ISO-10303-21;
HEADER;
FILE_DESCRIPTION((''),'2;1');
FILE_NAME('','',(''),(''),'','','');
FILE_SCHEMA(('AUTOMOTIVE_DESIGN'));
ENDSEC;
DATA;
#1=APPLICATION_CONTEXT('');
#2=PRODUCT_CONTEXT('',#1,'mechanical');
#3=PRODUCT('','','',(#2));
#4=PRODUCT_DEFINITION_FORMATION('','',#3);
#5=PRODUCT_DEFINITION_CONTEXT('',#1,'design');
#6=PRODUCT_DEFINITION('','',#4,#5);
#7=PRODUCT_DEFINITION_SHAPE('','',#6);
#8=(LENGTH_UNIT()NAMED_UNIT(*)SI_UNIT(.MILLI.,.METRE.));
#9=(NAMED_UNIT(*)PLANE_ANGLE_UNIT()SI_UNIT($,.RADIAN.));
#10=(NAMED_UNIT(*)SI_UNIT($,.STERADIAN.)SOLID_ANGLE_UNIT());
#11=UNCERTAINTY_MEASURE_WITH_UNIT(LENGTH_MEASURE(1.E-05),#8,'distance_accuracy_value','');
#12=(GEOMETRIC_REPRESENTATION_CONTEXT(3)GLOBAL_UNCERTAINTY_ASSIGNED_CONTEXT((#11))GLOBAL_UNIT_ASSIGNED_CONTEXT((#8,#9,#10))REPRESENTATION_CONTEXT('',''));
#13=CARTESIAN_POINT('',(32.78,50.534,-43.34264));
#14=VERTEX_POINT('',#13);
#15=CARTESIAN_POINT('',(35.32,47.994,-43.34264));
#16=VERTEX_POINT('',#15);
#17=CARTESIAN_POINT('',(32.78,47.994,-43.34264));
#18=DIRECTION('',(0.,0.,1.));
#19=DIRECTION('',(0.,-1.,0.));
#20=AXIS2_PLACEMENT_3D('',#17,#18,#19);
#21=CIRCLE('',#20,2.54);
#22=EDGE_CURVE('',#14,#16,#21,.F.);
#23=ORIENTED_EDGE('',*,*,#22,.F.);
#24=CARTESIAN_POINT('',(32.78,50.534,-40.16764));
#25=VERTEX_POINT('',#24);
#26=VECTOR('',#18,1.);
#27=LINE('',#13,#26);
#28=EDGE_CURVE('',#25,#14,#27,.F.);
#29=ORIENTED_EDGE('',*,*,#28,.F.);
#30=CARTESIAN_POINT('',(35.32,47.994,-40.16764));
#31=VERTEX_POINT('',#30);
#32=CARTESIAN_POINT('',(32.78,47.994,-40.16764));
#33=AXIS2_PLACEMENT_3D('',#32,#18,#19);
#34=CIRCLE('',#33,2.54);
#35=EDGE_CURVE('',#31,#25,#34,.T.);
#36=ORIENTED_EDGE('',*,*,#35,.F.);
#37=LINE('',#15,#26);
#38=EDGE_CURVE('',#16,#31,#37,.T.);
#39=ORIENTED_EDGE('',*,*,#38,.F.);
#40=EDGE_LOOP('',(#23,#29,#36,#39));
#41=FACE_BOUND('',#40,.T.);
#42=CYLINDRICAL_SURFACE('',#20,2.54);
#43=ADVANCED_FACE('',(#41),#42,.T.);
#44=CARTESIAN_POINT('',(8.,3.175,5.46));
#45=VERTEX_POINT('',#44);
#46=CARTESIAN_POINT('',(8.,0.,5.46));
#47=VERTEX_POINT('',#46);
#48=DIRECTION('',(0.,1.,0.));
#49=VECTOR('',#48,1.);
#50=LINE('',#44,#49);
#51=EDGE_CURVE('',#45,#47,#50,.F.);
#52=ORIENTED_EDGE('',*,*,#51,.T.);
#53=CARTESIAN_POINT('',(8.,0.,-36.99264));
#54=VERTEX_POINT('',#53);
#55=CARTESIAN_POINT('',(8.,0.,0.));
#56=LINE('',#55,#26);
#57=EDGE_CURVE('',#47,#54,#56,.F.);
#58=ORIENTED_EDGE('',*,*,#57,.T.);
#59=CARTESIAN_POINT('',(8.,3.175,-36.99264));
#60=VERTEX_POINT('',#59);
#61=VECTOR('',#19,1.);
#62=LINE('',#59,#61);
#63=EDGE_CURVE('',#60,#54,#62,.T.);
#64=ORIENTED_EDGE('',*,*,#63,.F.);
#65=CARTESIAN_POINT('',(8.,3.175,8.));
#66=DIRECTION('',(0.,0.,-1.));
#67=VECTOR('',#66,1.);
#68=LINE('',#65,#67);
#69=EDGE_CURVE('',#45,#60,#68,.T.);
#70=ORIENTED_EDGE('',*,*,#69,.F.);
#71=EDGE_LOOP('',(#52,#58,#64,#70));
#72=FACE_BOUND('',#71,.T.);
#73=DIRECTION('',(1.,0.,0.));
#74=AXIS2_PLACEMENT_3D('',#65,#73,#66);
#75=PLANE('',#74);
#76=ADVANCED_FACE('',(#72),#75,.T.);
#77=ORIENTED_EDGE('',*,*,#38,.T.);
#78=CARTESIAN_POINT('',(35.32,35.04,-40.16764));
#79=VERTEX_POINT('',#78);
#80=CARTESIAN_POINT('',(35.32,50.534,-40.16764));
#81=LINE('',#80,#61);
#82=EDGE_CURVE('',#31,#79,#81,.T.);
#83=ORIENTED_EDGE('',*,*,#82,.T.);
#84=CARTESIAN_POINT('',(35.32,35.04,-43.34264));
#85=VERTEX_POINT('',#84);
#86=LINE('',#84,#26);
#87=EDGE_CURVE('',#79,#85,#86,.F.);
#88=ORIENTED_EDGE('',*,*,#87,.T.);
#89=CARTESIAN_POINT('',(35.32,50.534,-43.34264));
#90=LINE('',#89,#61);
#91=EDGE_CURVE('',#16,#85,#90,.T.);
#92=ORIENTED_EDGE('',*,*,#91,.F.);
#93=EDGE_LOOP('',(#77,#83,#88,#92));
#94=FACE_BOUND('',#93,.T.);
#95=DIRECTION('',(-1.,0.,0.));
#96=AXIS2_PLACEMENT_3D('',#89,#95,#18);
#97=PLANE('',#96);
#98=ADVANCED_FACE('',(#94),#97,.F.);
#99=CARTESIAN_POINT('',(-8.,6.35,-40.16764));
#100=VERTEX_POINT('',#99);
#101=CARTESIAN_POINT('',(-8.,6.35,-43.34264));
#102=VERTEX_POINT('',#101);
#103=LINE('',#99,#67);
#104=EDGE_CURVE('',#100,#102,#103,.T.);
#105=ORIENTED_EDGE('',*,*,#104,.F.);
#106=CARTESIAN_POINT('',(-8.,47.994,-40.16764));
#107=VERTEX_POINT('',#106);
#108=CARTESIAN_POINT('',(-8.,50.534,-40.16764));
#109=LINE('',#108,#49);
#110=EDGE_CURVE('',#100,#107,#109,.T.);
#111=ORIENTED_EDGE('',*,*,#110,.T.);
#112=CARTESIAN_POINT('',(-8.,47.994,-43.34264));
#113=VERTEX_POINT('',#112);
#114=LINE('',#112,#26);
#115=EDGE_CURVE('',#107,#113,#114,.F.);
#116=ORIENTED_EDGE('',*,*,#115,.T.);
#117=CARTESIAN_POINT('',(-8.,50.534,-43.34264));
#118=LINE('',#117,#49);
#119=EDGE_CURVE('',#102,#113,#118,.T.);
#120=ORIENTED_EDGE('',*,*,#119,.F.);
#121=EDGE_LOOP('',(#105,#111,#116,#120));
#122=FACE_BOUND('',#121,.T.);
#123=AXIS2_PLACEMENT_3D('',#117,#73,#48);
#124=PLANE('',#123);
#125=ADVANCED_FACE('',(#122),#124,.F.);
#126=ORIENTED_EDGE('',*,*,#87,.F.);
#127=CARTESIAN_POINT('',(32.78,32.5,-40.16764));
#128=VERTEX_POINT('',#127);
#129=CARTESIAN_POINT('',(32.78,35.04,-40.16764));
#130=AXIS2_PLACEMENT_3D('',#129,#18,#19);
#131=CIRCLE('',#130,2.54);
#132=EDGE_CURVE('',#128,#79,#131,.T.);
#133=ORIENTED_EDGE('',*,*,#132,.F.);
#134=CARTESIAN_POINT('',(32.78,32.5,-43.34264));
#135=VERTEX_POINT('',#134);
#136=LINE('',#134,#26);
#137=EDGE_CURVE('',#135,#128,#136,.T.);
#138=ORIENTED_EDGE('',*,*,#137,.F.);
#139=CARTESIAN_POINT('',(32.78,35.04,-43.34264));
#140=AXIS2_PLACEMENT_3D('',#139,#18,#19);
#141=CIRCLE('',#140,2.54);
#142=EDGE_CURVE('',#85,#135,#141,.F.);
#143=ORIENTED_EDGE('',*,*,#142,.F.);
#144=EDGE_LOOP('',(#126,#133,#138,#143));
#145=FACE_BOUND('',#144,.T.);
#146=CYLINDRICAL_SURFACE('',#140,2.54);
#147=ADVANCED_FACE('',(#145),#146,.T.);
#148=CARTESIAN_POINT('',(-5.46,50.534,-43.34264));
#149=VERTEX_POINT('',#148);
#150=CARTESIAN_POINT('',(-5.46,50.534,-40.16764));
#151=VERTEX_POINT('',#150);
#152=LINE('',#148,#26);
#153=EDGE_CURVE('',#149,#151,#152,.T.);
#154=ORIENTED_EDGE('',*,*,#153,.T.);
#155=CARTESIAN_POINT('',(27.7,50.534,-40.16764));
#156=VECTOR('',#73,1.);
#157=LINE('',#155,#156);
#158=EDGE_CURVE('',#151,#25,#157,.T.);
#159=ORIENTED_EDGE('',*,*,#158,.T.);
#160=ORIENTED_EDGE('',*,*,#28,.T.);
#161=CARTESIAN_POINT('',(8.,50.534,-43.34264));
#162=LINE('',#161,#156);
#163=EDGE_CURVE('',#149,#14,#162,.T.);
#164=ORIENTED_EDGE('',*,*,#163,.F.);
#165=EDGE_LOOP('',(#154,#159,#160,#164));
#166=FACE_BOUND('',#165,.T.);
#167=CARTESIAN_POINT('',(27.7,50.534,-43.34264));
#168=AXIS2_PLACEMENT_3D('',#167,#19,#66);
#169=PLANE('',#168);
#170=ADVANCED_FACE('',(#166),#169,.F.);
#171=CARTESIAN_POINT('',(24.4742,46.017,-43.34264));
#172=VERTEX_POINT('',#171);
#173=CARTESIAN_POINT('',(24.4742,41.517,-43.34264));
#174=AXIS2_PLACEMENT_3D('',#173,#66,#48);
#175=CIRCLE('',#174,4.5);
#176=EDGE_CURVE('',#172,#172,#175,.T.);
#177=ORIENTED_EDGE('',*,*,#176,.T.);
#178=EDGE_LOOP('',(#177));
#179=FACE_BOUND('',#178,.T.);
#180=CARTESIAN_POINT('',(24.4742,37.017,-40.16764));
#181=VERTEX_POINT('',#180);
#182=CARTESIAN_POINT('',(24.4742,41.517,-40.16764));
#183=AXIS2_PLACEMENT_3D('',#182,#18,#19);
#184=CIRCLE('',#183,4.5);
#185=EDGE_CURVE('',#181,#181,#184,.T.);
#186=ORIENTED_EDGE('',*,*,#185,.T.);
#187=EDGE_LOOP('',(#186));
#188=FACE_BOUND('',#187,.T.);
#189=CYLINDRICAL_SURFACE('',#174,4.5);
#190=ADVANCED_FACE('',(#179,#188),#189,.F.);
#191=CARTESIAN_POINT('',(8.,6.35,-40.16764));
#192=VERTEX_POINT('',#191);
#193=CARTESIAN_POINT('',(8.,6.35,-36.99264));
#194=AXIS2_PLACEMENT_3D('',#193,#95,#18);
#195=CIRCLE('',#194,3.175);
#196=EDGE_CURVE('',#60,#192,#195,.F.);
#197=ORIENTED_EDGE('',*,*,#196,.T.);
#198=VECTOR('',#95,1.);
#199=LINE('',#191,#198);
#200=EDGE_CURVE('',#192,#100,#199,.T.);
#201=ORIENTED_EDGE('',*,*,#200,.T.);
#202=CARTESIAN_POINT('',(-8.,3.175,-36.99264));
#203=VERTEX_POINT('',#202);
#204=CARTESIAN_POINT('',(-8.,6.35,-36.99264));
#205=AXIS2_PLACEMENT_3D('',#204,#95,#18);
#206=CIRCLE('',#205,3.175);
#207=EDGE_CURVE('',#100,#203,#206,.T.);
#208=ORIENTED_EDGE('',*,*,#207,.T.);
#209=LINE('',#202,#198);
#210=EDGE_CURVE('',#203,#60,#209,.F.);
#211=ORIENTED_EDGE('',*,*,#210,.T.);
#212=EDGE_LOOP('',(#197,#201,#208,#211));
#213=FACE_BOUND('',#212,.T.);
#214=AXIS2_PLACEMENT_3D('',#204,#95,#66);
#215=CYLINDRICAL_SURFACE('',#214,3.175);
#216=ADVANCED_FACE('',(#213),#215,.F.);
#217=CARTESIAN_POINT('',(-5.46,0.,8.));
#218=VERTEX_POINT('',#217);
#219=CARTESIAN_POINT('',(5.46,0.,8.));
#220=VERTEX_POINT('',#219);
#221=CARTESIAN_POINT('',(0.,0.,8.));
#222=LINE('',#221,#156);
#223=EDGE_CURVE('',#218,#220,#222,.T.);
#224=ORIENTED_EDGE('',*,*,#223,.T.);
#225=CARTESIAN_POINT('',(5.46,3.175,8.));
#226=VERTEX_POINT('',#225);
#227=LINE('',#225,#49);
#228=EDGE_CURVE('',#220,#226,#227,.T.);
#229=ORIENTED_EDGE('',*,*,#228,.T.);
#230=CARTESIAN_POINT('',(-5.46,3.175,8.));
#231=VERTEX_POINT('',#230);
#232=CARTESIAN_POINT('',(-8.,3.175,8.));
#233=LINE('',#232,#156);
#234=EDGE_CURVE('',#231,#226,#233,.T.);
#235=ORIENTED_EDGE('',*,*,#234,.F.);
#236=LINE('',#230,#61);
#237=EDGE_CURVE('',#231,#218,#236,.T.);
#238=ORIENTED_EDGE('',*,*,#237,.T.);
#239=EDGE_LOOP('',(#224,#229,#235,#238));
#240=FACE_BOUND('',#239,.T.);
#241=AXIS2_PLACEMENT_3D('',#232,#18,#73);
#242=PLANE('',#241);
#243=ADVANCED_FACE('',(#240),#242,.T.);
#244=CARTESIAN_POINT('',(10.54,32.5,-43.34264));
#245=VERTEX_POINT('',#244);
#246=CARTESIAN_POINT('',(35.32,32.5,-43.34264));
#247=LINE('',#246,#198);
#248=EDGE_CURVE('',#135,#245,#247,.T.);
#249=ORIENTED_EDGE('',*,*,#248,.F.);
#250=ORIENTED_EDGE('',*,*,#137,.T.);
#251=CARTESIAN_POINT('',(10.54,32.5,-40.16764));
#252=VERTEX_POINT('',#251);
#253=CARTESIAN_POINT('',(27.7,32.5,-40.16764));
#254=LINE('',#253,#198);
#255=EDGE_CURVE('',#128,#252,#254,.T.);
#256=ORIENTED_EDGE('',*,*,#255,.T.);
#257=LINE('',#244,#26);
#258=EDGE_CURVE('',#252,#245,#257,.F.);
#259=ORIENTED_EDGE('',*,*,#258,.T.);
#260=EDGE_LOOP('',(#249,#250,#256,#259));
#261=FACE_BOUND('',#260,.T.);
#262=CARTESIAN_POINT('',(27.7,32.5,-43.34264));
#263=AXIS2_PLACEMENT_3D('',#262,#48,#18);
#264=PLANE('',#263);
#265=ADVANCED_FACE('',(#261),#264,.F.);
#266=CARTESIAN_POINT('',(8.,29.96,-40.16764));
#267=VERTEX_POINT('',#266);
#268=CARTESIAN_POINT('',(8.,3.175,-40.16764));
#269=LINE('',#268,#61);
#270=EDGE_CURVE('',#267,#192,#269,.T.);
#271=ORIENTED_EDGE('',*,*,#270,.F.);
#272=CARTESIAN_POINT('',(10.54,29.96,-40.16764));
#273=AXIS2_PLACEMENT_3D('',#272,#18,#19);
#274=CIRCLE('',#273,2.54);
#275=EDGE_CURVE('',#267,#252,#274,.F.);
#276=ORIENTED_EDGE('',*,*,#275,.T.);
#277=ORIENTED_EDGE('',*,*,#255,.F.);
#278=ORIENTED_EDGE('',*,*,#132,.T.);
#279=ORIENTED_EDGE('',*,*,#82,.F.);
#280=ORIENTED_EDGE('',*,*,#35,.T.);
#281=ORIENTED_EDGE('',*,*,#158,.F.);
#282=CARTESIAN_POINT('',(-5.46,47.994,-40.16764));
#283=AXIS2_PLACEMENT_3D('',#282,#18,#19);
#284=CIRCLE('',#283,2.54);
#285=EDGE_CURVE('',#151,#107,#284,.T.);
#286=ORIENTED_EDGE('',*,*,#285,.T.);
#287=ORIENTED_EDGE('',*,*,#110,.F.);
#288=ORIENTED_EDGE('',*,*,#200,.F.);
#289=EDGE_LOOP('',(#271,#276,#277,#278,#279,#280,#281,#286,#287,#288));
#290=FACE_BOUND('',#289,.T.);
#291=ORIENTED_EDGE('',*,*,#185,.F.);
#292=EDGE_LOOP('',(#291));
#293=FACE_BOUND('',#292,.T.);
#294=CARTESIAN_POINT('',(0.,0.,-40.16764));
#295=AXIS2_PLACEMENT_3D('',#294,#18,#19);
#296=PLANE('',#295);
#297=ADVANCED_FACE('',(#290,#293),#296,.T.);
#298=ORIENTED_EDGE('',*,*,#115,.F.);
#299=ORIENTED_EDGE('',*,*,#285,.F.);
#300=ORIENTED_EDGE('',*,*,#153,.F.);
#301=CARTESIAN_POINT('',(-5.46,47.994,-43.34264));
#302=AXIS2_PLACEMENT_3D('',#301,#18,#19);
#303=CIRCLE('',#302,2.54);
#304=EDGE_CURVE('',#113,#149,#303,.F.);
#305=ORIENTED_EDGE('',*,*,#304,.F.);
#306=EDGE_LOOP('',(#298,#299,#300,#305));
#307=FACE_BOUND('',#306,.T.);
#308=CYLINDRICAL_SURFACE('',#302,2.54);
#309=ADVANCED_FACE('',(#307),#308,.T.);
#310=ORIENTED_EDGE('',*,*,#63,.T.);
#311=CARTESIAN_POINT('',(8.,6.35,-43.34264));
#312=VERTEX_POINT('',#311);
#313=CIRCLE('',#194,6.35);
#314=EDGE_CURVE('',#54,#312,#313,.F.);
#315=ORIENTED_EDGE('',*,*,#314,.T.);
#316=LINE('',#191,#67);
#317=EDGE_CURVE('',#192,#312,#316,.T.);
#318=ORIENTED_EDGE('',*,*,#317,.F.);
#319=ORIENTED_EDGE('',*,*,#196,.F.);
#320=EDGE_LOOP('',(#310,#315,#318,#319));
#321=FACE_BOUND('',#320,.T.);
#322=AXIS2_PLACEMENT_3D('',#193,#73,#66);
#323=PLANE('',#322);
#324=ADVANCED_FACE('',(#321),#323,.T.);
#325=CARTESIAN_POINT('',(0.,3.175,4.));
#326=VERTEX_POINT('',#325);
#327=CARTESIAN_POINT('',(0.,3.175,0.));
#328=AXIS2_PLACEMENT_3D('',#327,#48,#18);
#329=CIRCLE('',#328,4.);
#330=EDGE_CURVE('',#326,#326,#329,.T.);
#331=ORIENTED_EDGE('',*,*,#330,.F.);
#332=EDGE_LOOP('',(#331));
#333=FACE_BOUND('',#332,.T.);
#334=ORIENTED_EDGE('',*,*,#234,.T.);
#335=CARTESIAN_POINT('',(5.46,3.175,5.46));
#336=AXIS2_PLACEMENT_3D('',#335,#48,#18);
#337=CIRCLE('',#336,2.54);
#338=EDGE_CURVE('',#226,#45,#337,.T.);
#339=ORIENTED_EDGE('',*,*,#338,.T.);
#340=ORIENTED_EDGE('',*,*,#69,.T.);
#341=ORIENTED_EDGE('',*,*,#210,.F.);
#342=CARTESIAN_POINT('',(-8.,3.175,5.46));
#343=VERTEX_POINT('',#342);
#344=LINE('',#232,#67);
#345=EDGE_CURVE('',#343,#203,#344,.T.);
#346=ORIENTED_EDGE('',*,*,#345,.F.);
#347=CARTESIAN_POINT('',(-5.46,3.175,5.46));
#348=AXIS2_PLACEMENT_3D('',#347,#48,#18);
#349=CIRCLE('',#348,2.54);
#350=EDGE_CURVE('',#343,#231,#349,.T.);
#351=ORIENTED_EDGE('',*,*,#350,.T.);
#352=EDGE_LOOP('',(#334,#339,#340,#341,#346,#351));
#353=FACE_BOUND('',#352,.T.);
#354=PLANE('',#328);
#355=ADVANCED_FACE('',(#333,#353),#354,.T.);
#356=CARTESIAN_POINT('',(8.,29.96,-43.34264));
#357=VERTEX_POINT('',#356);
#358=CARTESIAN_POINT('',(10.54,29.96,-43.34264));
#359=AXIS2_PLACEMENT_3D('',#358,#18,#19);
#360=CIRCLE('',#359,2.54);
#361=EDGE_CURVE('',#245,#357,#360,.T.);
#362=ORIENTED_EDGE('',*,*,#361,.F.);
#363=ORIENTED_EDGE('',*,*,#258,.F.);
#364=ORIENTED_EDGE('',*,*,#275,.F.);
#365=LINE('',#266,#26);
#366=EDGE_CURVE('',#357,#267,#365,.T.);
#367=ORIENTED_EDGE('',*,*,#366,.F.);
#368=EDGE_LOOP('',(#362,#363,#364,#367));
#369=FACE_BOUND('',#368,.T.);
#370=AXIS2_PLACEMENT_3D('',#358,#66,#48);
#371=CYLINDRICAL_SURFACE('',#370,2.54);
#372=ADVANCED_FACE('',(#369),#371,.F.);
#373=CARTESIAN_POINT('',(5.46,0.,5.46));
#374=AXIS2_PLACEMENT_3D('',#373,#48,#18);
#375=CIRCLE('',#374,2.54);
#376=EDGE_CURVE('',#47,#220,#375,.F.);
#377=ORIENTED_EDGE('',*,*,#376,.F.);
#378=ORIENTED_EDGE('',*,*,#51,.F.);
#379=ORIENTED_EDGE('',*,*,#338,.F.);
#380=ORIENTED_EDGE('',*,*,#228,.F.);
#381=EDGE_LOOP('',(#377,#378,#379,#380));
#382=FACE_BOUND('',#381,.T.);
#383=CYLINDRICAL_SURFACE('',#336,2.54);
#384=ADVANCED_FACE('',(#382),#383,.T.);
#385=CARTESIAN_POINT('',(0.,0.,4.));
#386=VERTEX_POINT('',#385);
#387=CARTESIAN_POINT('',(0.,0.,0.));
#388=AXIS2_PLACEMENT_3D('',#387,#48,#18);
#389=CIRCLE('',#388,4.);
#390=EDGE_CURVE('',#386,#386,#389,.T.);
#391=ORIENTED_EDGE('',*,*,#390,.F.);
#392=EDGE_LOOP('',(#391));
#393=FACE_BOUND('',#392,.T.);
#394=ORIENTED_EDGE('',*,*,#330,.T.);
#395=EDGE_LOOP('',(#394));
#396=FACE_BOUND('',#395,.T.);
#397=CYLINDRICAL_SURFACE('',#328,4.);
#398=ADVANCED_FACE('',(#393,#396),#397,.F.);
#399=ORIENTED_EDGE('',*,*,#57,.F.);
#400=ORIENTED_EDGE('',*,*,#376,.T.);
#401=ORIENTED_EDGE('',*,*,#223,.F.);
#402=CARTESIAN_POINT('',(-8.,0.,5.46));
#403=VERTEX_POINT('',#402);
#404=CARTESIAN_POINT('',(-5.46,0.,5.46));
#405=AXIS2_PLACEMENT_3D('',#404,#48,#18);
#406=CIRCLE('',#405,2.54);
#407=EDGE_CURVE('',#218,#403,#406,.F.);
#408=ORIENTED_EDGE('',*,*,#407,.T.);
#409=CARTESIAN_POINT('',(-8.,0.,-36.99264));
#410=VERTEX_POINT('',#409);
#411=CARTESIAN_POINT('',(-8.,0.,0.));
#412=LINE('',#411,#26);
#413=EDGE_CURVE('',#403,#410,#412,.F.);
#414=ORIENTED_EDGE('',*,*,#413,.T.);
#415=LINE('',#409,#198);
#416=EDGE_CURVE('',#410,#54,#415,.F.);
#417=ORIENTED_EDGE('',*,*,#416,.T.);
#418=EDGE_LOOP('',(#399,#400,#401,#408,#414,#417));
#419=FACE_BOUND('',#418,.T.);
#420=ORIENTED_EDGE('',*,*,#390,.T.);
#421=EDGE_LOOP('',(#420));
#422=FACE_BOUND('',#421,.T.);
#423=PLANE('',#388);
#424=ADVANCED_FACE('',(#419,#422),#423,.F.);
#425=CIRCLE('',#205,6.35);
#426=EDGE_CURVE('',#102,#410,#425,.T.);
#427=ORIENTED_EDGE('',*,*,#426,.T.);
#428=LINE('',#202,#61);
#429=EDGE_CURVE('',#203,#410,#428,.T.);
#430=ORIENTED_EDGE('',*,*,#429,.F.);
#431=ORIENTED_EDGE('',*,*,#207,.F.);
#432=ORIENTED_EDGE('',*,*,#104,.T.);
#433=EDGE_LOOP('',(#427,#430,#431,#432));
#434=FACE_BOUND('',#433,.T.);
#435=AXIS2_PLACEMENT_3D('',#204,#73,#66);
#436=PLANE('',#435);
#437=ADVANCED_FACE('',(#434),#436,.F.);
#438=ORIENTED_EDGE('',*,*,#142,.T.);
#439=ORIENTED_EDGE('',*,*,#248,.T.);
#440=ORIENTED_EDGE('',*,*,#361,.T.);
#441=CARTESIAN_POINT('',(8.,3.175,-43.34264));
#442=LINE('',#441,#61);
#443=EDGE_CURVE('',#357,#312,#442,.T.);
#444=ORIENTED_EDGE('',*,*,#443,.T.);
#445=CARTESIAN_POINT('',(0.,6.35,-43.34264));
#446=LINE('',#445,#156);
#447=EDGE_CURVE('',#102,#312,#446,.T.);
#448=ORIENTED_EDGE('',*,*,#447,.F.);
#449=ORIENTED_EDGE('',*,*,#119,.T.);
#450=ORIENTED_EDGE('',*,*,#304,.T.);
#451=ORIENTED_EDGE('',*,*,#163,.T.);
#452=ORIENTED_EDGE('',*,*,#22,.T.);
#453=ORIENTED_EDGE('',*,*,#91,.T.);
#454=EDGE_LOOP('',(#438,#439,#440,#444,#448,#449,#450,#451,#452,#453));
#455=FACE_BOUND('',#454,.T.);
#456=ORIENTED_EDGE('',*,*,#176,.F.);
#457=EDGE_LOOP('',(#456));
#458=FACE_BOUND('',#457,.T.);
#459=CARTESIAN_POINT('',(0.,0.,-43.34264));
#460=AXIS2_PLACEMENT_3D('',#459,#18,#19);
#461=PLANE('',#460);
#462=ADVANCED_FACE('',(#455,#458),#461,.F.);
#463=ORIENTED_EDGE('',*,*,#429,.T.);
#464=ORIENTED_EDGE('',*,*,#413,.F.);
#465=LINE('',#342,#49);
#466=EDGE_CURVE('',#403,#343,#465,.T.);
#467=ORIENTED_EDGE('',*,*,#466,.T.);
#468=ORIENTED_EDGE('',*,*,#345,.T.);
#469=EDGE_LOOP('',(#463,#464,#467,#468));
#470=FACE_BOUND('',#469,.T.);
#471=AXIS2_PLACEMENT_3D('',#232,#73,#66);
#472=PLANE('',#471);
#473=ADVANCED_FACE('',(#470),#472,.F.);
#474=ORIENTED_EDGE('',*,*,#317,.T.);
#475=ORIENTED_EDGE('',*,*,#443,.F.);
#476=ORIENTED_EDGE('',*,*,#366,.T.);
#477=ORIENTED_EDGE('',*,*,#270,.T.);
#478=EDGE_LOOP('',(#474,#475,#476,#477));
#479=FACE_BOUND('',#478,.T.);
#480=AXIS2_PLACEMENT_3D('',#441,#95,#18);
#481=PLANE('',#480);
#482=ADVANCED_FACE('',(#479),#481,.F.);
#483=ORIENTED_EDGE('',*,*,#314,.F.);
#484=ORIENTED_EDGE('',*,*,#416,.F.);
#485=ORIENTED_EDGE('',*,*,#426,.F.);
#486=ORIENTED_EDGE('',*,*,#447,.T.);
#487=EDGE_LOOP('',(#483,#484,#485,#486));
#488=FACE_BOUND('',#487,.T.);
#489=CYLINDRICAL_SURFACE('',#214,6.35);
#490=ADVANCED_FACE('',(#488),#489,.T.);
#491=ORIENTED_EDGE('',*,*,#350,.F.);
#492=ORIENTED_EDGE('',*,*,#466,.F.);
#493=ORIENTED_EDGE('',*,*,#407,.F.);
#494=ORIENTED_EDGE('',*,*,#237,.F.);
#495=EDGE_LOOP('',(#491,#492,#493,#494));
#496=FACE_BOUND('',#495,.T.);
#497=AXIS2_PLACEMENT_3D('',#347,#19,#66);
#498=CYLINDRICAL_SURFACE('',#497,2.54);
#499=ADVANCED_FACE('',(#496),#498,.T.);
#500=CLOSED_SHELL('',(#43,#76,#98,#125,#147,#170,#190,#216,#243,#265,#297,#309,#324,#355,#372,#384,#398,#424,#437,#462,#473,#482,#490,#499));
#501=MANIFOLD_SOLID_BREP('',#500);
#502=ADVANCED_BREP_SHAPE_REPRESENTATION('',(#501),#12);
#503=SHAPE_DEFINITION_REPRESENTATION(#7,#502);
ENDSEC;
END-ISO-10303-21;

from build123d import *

# Parameters (mm, degrees)
SKETCH1_W                    = 16
SKETCH1_H                    = 48.167640012
SKETCH1_R                    = 4
BOSS_EXTRUDE1_DEPTH          = 3.175
EDGE_FLANGE1_STRIP_W         = 19.05
EDGE_FLANGE1_STRIP_H         = 3.175
EDGE_FLANGE1_STRIP_CUT_DEPTH = 16
EDGE_FLANGE1_DEPTH           = 16
EDGE_FLANGE1_START           = 3.175
EDGE_FLANGE1_FLAT_DEPTH      = 3.175
SKETCH11_R                   = 3.7210804
CUT_EXTRUDE1_DEPTH           = 81.232501141
M8_CLEARANCE_HOLE1_D         = 9
FILLET1_R                    = 2.54


# Sheet-metal steps are written as plain solids
with BuildPart() as part:
    # Sketch1 → Boss-Extrude1 (new body)
    with BuildSketch(Plane(origin=(0, 0, 0), x_dir=(1, 0, 0), z_dir=(0, 1, 0))):
        with Locations((0, 16.083820006)):
            Rectangle(SKETCH1_W, SKETCH1_H)
        with Locations(Location((0, 0, 0), (0, 0, 270))):
            Circle(SKETCH1_R, mode=Mode.SUBTRACT)
    extrude(amount=BOSS_EXTRUDE1_DEPTH)

    # Edge-Flange1 strip (across the edge) → Edge-Flange1 strip cut (cut)
    with BuildSketch(Plane(origin=(8, 3.175, -40.167640012), x_dir=(0, 0, 1), z_dir=(-1, 0, 0))):
        with Locations((-6.35, -1.5875)):
            Rectangle(EDGE_FLANGE1_STRIP_W, EDGE_FLANGE1_STRIP_H)
    extrude(amount=EDGE_FLANGE1_STRIP_CUT_DEPTH, mode=Mode.SUBTRACT)

    # Edge-Flange1 bend section (across the edge) → Edge-Flange1 (add)
    with BuildSketch(Plane(origin=(8, 3.175, -40.167640012), x_dir=(0, 0, 1), z_dir=(-1, 0, 0))):
        with BuildLine():
            Line((-3.175, 3.175), (0, 3.175))
            ThreePointArc((0, 3.175), (0.92993597, 0.92993597), (3.175, 0))
            Line((3.175, 0), (3.175, -3.175))
            ThreePointArc((3.175, -3.175), (-1.315128061, -1.315128061), (-3.175, 3.175))
        make_face()
    extrude(amount=EDGE_FLANGE1_DEPTH)

    # Edge-Flange1 profile (on flange) → Edge-Flange1 flat (add)
    with BuildSketch(Plane(origin=(0, 3.175, -40.167640012), x_dir=(-1, 0, 0), z_dir=(0, 0, -1)).offset(EDGE_FLANGE1_START)):
        Polygon((8, 3.175), (8, 47.359), (-8, 47.359), (-27.7, 47.359), (-35.32, 47.359), (-35.32, 29.325), (-27.7, 29.325), (-8, 29.325), (-8, 3.175), align=None)
    extrude(amount=-EDGE_FLANGE1_FLAT_DEPTH)

    # Sketch11 → Cut-Extrude1 (cut, through all)
    with BuildSketch(Plane(origin=(0, 0, -43.342640012), x_dir=(-1, 0, 0), z_dir=(0, 0, -1))):
        with Locations(Location((-24.4742, 41.517, 0), (0, 0, 90))):
            Circle(SKETCH11_R)
    extrude(amount=-CUT_EXTRUDE1_DEPTH, mode=Mode.SUBTRACT)

    # M8 Clearance Hole1 (through all)
    with Locations(Plane(origin=(0, 0, -43.342640012), x_dir=(-1, 0, 0), z_dir=(0, 0, -1))):
        with Locations((-24.4742, 41.517)):
            Hole(M8_CLEARANCE_HOLE1_D / 2)

    # Fillet1
    fillet1_edges = [part.edges().sort_by_distance(p)[0] for p in [
        (8, 32.5, -41.755140012),
        (-8, 50.534, -41.755140012),
        (35.32, 50.534, -41.755140012),
        (35.32, 32.5, -41.755140012),
        (8, 1.5875, 8),
        (-8, 1.5875, 8),
    ]]
    fillet(fillet1_edges, radius=FILLET1_R)


solid = part.part
